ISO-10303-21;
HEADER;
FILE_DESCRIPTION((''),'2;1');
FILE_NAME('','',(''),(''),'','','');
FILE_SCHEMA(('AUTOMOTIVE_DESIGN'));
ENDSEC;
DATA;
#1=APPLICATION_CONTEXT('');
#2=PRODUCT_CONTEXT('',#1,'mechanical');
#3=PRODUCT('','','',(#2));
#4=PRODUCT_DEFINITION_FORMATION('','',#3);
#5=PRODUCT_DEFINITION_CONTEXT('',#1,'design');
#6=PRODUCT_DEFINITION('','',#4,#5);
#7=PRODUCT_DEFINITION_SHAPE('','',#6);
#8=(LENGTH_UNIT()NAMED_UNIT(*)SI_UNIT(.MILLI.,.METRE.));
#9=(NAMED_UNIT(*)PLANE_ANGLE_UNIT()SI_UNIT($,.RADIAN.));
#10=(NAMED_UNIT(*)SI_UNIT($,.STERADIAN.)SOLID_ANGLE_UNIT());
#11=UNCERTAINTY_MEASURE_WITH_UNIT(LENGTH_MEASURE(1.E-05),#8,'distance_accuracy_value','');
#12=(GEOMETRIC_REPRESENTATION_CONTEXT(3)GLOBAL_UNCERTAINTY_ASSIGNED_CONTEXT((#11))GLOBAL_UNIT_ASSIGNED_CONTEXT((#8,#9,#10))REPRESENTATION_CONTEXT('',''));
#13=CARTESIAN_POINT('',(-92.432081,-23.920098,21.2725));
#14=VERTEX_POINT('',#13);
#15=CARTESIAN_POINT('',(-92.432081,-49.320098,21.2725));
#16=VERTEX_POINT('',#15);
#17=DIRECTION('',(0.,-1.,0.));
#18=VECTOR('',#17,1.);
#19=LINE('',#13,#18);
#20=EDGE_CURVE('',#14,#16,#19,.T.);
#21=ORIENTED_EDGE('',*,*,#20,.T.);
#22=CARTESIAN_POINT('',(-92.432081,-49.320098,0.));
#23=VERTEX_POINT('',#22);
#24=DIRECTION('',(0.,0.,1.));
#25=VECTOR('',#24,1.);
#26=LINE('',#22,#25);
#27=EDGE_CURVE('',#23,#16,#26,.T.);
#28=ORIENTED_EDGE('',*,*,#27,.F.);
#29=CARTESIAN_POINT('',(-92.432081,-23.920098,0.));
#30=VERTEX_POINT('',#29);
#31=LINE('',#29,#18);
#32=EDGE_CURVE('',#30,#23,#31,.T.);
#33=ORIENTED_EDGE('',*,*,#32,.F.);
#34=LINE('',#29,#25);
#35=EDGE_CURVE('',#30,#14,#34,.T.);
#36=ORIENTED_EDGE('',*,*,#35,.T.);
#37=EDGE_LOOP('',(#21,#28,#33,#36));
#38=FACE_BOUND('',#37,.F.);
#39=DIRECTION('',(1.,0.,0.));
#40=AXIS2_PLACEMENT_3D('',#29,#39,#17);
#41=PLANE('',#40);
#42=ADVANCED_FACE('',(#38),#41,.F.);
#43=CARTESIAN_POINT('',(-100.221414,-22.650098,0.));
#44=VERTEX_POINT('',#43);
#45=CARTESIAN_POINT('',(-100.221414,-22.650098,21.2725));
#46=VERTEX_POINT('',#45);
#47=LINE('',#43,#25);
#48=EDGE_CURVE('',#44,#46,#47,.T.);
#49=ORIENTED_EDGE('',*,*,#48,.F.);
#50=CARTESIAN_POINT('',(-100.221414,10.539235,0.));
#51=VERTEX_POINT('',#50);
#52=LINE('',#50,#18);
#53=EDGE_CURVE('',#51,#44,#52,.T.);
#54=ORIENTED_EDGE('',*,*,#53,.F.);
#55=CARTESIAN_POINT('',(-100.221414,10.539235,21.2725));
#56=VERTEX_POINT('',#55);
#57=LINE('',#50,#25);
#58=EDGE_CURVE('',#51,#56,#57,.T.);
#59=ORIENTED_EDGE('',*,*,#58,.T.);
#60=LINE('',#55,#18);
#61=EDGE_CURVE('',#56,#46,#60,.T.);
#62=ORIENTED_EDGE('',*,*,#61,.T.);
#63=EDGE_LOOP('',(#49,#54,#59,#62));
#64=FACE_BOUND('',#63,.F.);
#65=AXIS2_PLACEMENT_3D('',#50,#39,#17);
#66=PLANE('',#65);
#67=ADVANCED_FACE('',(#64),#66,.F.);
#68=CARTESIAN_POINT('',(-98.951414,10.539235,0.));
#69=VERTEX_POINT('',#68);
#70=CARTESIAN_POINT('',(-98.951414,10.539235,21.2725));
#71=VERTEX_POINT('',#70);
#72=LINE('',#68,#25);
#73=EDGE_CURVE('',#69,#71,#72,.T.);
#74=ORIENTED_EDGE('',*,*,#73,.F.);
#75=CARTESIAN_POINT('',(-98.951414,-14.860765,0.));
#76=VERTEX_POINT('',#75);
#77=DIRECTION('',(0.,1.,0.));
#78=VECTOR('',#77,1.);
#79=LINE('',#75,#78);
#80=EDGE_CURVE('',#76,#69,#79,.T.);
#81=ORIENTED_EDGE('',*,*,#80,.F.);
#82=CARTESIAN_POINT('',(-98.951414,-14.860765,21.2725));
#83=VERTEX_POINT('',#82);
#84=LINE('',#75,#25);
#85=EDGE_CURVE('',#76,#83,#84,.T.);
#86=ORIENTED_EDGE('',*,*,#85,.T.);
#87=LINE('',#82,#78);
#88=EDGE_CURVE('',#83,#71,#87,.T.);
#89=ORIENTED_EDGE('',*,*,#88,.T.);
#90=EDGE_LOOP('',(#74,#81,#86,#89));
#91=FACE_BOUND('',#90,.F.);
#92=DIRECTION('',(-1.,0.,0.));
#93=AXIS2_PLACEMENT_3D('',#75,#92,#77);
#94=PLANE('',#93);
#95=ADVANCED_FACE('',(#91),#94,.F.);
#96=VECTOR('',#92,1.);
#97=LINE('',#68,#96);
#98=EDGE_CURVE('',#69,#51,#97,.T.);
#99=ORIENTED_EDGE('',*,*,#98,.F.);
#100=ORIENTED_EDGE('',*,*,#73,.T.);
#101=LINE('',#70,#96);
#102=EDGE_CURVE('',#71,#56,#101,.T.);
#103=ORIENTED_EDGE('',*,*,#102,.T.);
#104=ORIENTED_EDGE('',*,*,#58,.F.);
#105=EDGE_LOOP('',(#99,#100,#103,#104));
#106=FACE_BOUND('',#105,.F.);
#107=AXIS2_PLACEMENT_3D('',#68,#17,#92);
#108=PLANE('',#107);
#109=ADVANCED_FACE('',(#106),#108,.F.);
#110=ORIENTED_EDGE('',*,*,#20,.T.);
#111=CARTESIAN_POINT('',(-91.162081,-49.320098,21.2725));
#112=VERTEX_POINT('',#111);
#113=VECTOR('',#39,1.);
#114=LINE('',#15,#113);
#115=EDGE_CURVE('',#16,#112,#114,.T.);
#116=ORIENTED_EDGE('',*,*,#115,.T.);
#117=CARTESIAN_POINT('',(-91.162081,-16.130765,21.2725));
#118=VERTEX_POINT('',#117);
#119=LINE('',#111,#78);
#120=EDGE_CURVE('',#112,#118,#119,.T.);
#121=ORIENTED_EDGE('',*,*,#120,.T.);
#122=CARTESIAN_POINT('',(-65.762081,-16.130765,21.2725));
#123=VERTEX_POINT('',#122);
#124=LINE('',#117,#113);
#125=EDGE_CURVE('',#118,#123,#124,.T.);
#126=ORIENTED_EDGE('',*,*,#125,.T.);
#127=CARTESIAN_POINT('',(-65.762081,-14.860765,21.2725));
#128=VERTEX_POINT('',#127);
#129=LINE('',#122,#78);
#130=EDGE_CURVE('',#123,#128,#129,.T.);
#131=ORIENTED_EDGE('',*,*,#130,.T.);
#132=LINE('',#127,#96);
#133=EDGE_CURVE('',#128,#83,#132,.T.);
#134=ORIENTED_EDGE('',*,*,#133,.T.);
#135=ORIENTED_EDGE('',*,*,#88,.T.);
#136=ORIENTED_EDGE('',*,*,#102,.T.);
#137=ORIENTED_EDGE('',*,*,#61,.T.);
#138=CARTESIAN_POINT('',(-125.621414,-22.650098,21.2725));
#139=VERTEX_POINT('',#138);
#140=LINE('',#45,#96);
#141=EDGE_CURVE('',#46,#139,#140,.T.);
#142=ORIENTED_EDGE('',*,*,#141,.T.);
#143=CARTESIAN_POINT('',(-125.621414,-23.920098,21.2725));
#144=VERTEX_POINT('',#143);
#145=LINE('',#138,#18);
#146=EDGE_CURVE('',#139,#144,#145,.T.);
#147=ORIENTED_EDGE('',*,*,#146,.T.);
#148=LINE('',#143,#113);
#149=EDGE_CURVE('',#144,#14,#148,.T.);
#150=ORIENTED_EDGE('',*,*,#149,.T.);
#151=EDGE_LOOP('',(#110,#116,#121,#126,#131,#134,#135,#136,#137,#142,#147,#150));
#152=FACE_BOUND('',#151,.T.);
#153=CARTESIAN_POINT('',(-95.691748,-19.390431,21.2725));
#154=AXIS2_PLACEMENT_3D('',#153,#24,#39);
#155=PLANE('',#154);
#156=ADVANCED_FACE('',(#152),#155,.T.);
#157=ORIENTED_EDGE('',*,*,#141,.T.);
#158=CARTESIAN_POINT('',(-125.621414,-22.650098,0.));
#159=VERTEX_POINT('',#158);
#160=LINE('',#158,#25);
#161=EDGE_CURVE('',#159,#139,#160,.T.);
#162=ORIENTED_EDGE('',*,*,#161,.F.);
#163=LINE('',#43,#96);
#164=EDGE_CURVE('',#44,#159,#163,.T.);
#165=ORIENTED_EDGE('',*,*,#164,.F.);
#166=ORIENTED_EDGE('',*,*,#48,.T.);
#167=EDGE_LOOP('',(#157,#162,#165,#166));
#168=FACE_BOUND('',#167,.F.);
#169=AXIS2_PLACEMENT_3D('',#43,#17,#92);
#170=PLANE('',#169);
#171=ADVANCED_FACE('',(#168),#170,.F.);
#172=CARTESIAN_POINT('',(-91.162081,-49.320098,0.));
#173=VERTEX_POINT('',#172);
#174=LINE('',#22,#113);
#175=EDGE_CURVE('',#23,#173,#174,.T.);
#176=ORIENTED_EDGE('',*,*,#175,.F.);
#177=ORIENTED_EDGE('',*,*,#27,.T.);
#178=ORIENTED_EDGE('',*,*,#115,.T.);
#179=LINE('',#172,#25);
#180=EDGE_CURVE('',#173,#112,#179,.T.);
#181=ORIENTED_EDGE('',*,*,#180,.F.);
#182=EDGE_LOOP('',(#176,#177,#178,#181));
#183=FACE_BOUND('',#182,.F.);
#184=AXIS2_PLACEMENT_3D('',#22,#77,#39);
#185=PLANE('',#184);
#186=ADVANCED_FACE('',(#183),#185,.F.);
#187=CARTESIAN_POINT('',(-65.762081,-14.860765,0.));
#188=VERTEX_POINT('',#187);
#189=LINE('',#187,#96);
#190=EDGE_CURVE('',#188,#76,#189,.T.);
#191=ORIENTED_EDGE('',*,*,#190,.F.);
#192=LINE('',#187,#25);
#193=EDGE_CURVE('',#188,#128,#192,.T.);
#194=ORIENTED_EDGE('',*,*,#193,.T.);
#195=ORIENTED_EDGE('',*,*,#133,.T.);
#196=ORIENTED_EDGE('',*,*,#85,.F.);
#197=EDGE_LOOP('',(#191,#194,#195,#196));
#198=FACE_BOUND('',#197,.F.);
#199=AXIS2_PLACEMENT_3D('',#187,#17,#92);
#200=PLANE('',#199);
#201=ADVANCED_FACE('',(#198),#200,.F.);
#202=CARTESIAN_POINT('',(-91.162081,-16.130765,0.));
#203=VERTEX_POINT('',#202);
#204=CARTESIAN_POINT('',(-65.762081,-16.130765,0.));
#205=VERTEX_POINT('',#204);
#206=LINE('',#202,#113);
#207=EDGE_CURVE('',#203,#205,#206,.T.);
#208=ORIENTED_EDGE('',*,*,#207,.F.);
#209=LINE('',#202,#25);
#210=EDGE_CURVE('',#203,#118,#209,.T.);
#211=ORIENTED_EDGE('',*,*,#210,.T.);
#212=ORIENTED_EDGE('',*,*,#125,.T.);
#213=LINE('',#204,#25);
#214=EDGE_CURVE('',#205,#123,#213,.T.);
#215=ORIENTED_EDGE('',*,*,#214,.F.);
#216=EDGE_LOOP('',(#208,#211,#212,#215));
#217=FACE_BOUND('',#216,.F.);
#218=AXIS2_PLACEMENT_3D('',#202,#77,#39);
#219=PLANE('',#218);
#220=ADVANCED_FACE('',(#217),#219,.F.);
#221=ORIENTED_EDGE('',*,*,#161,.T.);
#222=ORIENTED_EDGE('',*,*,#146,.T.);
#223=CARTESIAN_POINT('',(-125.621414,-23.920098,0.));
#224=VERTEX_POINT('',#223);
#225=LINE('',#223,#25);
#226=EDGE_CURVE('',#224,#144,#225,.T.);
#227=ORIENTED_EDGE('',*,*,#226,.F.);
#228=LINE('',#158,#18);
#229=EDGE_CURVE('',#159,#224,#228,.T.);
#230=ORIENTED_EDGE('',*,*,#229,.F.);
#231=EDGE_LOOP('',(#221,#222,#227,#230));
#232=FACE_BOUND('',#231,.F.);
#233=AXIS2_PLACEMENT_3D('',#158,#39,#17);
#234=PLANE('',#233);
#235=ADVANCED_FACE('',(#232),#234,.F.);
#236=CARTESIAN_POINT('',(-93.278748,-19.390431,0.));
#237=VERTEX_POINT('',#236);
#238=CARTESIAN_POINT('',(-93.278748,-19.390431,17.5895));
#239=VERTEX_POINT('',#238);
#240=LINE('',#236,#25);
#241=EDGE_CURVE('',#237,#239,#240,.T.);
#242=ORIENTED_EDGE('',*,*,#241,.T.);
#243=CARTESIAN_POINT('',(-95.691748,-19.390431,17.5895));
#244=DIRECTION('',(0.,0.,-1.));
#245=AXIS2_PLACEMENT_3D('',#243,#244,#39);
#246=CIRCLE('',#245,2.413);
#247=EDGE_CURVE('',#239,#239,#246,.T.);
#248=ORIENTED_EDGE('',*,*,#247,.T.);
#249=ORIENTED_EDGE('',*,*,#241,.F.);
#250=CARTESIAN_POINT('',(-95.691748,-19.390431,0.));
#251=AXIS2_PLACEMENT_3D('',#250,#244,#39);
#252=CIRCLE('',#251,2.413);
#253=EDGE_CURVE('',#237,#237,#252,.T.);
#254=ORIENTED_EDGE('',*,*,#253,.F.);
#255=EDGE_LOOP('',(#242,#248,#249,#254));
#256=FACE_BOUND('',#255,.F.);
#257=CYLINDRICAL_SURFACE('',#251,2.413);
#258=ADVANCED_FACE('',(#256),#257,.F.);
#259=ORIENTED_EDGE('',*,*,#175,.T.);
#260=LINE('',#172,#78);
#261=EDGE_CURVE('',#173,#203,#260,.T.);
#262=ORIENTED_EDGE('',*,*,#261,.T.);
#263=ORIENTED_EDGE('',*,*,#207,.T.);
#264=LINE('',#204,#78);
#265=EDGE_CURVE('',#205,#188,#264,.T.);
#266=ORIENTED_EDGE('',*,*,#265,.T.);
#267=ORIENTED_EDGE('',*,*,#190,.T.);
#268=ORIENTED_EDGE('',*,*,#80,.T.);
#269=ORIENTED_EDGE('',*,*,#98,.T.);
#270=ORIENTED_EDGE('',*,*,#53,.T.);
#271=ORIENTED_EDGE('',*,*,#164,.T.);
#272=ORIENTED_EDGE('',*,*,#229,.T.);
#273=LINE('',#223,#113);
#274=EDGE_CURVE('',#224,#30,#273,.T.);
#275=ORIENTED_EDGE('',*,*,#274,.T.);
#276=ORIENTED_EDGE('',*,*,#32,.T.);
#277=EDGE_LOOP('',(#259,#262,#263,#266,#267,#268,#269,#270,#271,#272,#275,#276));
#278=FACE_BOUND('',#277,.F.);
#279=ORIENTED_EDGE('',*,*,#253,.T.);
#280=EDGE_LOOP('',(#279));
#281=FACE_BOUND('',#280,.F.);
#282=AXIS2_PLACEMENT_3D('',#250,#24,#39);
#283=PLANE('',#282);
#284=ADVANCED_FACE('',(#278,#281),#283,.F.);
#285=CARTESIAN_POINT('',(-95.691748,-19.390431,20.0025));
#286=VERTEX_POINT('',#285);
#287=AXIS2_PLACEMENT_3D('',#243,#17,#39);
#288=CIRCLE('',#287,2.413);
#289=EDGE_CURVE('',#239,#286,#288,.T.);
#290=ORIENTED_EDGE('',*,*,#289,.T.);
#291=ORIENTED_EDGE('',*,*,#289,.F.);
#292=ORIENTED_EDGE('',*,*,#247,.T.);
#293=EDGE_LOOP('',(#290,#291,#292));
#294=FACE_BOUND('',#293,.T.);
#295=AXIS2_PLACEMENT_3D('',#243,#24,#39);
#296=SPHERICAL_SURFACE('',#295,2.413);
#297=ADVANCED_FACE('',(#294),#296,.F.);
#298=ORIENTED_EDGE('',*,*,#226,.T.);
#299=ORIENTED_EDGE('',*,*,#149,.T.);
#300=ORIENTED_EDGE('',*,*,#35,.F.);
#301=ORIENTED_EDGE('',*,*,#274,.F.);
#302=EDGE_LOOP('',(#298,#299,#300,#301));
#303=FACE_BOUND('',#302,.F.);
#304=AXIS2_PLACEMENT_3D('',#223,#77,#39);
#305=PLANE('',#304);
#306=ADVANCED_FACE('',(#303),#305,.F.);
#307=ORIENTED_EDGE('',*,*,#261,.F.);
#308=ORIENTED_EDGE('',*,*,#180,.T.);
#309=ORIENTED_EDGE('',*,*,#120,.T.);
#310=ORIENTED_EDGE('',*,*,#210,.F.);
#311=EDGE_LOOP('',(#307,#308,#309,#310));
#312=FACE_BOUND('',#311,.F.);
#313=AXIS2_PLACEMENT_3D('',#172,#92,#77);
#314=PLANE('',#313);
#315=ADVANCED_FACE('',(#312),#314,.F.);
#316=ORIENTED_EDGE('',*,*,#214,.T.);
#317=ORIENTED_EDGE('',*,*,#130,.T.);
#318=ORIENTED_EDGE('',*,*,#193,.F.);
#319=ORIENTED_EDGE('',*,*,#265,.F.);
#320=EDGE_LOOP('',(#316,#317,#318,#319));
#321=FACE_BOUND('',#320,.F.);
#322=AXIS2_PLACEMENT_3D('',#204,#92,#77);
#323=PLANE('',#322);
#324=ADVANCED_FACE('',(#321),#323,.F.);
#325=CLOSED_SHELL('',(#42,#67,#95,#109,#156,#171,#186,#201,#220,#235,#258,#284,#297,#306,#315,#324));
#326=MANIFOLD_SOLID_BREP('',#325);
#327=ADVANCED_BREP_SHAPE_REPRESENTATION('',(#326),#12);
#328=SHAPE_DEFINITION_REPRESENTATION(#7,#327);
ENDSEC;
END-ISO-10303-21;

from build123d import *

# Parameters (mm, degrees)
F7_DEPTH = 21.2725
F8_R     = 2.413
F9_DEPTH = 20.0025
F10_R    = 2.413


# Not quite as in the source:
# - a variable given as a bare number and used for a length is read in inches; the dataset says mm whatever the document's units were


with BuildPart() as f7:
    # F6 (on Top) → F7 (new body)
    with BuildSketch(Plane.XY):
        Polygon((-100.2214143808, -23.920097865), (-92.4320810475, -23.920097865), (-92.4320810475, -49.320097865), (-91.1620810475, -49.320097865), (-91.1620810475, -23.920097865), (-91.1620810475, -16.1307645317), (-65.7620810475, -16.1307645317), (-65.7620810475, -14.8607645317), (-91.1620810475, -14.8607645317), (-93.2787477141, -14.8607645317), (-98.9514143808, -14.8607645317), (-98.9514143808, 10.5392354683), (-100.2214143808, 10.5392354683), (-100.2214143808, -14.8607645317), (-100.2214143808, -22.650097865), (-125.6214143808, -22.650097865), (-125.6214143808, -23.920097865), align=None)
    extrude(amount=F7_DEPTH)

    # F8 (on face) → F9 (cut)
    with BuildSketch(Plane(origin=(0, 0, 0), x_dir=(1, 0, 0), z_dir=(0, 0, -1))):
        with Locations((-95.6917477141, 19.3904311984)):
            Circle(F8_R)
    extrude(amount=-F9_DEPTH, mode=Mode.SUBTRACT)

    # F10
    f10_edges = [f7.edges().sort_by_distance(p)[0] for p in [
        (-98.104748, -19.390431, 20.0025),
    ]]
    fillet(f10_edges, radius=F10_R)


solid = f7.part
